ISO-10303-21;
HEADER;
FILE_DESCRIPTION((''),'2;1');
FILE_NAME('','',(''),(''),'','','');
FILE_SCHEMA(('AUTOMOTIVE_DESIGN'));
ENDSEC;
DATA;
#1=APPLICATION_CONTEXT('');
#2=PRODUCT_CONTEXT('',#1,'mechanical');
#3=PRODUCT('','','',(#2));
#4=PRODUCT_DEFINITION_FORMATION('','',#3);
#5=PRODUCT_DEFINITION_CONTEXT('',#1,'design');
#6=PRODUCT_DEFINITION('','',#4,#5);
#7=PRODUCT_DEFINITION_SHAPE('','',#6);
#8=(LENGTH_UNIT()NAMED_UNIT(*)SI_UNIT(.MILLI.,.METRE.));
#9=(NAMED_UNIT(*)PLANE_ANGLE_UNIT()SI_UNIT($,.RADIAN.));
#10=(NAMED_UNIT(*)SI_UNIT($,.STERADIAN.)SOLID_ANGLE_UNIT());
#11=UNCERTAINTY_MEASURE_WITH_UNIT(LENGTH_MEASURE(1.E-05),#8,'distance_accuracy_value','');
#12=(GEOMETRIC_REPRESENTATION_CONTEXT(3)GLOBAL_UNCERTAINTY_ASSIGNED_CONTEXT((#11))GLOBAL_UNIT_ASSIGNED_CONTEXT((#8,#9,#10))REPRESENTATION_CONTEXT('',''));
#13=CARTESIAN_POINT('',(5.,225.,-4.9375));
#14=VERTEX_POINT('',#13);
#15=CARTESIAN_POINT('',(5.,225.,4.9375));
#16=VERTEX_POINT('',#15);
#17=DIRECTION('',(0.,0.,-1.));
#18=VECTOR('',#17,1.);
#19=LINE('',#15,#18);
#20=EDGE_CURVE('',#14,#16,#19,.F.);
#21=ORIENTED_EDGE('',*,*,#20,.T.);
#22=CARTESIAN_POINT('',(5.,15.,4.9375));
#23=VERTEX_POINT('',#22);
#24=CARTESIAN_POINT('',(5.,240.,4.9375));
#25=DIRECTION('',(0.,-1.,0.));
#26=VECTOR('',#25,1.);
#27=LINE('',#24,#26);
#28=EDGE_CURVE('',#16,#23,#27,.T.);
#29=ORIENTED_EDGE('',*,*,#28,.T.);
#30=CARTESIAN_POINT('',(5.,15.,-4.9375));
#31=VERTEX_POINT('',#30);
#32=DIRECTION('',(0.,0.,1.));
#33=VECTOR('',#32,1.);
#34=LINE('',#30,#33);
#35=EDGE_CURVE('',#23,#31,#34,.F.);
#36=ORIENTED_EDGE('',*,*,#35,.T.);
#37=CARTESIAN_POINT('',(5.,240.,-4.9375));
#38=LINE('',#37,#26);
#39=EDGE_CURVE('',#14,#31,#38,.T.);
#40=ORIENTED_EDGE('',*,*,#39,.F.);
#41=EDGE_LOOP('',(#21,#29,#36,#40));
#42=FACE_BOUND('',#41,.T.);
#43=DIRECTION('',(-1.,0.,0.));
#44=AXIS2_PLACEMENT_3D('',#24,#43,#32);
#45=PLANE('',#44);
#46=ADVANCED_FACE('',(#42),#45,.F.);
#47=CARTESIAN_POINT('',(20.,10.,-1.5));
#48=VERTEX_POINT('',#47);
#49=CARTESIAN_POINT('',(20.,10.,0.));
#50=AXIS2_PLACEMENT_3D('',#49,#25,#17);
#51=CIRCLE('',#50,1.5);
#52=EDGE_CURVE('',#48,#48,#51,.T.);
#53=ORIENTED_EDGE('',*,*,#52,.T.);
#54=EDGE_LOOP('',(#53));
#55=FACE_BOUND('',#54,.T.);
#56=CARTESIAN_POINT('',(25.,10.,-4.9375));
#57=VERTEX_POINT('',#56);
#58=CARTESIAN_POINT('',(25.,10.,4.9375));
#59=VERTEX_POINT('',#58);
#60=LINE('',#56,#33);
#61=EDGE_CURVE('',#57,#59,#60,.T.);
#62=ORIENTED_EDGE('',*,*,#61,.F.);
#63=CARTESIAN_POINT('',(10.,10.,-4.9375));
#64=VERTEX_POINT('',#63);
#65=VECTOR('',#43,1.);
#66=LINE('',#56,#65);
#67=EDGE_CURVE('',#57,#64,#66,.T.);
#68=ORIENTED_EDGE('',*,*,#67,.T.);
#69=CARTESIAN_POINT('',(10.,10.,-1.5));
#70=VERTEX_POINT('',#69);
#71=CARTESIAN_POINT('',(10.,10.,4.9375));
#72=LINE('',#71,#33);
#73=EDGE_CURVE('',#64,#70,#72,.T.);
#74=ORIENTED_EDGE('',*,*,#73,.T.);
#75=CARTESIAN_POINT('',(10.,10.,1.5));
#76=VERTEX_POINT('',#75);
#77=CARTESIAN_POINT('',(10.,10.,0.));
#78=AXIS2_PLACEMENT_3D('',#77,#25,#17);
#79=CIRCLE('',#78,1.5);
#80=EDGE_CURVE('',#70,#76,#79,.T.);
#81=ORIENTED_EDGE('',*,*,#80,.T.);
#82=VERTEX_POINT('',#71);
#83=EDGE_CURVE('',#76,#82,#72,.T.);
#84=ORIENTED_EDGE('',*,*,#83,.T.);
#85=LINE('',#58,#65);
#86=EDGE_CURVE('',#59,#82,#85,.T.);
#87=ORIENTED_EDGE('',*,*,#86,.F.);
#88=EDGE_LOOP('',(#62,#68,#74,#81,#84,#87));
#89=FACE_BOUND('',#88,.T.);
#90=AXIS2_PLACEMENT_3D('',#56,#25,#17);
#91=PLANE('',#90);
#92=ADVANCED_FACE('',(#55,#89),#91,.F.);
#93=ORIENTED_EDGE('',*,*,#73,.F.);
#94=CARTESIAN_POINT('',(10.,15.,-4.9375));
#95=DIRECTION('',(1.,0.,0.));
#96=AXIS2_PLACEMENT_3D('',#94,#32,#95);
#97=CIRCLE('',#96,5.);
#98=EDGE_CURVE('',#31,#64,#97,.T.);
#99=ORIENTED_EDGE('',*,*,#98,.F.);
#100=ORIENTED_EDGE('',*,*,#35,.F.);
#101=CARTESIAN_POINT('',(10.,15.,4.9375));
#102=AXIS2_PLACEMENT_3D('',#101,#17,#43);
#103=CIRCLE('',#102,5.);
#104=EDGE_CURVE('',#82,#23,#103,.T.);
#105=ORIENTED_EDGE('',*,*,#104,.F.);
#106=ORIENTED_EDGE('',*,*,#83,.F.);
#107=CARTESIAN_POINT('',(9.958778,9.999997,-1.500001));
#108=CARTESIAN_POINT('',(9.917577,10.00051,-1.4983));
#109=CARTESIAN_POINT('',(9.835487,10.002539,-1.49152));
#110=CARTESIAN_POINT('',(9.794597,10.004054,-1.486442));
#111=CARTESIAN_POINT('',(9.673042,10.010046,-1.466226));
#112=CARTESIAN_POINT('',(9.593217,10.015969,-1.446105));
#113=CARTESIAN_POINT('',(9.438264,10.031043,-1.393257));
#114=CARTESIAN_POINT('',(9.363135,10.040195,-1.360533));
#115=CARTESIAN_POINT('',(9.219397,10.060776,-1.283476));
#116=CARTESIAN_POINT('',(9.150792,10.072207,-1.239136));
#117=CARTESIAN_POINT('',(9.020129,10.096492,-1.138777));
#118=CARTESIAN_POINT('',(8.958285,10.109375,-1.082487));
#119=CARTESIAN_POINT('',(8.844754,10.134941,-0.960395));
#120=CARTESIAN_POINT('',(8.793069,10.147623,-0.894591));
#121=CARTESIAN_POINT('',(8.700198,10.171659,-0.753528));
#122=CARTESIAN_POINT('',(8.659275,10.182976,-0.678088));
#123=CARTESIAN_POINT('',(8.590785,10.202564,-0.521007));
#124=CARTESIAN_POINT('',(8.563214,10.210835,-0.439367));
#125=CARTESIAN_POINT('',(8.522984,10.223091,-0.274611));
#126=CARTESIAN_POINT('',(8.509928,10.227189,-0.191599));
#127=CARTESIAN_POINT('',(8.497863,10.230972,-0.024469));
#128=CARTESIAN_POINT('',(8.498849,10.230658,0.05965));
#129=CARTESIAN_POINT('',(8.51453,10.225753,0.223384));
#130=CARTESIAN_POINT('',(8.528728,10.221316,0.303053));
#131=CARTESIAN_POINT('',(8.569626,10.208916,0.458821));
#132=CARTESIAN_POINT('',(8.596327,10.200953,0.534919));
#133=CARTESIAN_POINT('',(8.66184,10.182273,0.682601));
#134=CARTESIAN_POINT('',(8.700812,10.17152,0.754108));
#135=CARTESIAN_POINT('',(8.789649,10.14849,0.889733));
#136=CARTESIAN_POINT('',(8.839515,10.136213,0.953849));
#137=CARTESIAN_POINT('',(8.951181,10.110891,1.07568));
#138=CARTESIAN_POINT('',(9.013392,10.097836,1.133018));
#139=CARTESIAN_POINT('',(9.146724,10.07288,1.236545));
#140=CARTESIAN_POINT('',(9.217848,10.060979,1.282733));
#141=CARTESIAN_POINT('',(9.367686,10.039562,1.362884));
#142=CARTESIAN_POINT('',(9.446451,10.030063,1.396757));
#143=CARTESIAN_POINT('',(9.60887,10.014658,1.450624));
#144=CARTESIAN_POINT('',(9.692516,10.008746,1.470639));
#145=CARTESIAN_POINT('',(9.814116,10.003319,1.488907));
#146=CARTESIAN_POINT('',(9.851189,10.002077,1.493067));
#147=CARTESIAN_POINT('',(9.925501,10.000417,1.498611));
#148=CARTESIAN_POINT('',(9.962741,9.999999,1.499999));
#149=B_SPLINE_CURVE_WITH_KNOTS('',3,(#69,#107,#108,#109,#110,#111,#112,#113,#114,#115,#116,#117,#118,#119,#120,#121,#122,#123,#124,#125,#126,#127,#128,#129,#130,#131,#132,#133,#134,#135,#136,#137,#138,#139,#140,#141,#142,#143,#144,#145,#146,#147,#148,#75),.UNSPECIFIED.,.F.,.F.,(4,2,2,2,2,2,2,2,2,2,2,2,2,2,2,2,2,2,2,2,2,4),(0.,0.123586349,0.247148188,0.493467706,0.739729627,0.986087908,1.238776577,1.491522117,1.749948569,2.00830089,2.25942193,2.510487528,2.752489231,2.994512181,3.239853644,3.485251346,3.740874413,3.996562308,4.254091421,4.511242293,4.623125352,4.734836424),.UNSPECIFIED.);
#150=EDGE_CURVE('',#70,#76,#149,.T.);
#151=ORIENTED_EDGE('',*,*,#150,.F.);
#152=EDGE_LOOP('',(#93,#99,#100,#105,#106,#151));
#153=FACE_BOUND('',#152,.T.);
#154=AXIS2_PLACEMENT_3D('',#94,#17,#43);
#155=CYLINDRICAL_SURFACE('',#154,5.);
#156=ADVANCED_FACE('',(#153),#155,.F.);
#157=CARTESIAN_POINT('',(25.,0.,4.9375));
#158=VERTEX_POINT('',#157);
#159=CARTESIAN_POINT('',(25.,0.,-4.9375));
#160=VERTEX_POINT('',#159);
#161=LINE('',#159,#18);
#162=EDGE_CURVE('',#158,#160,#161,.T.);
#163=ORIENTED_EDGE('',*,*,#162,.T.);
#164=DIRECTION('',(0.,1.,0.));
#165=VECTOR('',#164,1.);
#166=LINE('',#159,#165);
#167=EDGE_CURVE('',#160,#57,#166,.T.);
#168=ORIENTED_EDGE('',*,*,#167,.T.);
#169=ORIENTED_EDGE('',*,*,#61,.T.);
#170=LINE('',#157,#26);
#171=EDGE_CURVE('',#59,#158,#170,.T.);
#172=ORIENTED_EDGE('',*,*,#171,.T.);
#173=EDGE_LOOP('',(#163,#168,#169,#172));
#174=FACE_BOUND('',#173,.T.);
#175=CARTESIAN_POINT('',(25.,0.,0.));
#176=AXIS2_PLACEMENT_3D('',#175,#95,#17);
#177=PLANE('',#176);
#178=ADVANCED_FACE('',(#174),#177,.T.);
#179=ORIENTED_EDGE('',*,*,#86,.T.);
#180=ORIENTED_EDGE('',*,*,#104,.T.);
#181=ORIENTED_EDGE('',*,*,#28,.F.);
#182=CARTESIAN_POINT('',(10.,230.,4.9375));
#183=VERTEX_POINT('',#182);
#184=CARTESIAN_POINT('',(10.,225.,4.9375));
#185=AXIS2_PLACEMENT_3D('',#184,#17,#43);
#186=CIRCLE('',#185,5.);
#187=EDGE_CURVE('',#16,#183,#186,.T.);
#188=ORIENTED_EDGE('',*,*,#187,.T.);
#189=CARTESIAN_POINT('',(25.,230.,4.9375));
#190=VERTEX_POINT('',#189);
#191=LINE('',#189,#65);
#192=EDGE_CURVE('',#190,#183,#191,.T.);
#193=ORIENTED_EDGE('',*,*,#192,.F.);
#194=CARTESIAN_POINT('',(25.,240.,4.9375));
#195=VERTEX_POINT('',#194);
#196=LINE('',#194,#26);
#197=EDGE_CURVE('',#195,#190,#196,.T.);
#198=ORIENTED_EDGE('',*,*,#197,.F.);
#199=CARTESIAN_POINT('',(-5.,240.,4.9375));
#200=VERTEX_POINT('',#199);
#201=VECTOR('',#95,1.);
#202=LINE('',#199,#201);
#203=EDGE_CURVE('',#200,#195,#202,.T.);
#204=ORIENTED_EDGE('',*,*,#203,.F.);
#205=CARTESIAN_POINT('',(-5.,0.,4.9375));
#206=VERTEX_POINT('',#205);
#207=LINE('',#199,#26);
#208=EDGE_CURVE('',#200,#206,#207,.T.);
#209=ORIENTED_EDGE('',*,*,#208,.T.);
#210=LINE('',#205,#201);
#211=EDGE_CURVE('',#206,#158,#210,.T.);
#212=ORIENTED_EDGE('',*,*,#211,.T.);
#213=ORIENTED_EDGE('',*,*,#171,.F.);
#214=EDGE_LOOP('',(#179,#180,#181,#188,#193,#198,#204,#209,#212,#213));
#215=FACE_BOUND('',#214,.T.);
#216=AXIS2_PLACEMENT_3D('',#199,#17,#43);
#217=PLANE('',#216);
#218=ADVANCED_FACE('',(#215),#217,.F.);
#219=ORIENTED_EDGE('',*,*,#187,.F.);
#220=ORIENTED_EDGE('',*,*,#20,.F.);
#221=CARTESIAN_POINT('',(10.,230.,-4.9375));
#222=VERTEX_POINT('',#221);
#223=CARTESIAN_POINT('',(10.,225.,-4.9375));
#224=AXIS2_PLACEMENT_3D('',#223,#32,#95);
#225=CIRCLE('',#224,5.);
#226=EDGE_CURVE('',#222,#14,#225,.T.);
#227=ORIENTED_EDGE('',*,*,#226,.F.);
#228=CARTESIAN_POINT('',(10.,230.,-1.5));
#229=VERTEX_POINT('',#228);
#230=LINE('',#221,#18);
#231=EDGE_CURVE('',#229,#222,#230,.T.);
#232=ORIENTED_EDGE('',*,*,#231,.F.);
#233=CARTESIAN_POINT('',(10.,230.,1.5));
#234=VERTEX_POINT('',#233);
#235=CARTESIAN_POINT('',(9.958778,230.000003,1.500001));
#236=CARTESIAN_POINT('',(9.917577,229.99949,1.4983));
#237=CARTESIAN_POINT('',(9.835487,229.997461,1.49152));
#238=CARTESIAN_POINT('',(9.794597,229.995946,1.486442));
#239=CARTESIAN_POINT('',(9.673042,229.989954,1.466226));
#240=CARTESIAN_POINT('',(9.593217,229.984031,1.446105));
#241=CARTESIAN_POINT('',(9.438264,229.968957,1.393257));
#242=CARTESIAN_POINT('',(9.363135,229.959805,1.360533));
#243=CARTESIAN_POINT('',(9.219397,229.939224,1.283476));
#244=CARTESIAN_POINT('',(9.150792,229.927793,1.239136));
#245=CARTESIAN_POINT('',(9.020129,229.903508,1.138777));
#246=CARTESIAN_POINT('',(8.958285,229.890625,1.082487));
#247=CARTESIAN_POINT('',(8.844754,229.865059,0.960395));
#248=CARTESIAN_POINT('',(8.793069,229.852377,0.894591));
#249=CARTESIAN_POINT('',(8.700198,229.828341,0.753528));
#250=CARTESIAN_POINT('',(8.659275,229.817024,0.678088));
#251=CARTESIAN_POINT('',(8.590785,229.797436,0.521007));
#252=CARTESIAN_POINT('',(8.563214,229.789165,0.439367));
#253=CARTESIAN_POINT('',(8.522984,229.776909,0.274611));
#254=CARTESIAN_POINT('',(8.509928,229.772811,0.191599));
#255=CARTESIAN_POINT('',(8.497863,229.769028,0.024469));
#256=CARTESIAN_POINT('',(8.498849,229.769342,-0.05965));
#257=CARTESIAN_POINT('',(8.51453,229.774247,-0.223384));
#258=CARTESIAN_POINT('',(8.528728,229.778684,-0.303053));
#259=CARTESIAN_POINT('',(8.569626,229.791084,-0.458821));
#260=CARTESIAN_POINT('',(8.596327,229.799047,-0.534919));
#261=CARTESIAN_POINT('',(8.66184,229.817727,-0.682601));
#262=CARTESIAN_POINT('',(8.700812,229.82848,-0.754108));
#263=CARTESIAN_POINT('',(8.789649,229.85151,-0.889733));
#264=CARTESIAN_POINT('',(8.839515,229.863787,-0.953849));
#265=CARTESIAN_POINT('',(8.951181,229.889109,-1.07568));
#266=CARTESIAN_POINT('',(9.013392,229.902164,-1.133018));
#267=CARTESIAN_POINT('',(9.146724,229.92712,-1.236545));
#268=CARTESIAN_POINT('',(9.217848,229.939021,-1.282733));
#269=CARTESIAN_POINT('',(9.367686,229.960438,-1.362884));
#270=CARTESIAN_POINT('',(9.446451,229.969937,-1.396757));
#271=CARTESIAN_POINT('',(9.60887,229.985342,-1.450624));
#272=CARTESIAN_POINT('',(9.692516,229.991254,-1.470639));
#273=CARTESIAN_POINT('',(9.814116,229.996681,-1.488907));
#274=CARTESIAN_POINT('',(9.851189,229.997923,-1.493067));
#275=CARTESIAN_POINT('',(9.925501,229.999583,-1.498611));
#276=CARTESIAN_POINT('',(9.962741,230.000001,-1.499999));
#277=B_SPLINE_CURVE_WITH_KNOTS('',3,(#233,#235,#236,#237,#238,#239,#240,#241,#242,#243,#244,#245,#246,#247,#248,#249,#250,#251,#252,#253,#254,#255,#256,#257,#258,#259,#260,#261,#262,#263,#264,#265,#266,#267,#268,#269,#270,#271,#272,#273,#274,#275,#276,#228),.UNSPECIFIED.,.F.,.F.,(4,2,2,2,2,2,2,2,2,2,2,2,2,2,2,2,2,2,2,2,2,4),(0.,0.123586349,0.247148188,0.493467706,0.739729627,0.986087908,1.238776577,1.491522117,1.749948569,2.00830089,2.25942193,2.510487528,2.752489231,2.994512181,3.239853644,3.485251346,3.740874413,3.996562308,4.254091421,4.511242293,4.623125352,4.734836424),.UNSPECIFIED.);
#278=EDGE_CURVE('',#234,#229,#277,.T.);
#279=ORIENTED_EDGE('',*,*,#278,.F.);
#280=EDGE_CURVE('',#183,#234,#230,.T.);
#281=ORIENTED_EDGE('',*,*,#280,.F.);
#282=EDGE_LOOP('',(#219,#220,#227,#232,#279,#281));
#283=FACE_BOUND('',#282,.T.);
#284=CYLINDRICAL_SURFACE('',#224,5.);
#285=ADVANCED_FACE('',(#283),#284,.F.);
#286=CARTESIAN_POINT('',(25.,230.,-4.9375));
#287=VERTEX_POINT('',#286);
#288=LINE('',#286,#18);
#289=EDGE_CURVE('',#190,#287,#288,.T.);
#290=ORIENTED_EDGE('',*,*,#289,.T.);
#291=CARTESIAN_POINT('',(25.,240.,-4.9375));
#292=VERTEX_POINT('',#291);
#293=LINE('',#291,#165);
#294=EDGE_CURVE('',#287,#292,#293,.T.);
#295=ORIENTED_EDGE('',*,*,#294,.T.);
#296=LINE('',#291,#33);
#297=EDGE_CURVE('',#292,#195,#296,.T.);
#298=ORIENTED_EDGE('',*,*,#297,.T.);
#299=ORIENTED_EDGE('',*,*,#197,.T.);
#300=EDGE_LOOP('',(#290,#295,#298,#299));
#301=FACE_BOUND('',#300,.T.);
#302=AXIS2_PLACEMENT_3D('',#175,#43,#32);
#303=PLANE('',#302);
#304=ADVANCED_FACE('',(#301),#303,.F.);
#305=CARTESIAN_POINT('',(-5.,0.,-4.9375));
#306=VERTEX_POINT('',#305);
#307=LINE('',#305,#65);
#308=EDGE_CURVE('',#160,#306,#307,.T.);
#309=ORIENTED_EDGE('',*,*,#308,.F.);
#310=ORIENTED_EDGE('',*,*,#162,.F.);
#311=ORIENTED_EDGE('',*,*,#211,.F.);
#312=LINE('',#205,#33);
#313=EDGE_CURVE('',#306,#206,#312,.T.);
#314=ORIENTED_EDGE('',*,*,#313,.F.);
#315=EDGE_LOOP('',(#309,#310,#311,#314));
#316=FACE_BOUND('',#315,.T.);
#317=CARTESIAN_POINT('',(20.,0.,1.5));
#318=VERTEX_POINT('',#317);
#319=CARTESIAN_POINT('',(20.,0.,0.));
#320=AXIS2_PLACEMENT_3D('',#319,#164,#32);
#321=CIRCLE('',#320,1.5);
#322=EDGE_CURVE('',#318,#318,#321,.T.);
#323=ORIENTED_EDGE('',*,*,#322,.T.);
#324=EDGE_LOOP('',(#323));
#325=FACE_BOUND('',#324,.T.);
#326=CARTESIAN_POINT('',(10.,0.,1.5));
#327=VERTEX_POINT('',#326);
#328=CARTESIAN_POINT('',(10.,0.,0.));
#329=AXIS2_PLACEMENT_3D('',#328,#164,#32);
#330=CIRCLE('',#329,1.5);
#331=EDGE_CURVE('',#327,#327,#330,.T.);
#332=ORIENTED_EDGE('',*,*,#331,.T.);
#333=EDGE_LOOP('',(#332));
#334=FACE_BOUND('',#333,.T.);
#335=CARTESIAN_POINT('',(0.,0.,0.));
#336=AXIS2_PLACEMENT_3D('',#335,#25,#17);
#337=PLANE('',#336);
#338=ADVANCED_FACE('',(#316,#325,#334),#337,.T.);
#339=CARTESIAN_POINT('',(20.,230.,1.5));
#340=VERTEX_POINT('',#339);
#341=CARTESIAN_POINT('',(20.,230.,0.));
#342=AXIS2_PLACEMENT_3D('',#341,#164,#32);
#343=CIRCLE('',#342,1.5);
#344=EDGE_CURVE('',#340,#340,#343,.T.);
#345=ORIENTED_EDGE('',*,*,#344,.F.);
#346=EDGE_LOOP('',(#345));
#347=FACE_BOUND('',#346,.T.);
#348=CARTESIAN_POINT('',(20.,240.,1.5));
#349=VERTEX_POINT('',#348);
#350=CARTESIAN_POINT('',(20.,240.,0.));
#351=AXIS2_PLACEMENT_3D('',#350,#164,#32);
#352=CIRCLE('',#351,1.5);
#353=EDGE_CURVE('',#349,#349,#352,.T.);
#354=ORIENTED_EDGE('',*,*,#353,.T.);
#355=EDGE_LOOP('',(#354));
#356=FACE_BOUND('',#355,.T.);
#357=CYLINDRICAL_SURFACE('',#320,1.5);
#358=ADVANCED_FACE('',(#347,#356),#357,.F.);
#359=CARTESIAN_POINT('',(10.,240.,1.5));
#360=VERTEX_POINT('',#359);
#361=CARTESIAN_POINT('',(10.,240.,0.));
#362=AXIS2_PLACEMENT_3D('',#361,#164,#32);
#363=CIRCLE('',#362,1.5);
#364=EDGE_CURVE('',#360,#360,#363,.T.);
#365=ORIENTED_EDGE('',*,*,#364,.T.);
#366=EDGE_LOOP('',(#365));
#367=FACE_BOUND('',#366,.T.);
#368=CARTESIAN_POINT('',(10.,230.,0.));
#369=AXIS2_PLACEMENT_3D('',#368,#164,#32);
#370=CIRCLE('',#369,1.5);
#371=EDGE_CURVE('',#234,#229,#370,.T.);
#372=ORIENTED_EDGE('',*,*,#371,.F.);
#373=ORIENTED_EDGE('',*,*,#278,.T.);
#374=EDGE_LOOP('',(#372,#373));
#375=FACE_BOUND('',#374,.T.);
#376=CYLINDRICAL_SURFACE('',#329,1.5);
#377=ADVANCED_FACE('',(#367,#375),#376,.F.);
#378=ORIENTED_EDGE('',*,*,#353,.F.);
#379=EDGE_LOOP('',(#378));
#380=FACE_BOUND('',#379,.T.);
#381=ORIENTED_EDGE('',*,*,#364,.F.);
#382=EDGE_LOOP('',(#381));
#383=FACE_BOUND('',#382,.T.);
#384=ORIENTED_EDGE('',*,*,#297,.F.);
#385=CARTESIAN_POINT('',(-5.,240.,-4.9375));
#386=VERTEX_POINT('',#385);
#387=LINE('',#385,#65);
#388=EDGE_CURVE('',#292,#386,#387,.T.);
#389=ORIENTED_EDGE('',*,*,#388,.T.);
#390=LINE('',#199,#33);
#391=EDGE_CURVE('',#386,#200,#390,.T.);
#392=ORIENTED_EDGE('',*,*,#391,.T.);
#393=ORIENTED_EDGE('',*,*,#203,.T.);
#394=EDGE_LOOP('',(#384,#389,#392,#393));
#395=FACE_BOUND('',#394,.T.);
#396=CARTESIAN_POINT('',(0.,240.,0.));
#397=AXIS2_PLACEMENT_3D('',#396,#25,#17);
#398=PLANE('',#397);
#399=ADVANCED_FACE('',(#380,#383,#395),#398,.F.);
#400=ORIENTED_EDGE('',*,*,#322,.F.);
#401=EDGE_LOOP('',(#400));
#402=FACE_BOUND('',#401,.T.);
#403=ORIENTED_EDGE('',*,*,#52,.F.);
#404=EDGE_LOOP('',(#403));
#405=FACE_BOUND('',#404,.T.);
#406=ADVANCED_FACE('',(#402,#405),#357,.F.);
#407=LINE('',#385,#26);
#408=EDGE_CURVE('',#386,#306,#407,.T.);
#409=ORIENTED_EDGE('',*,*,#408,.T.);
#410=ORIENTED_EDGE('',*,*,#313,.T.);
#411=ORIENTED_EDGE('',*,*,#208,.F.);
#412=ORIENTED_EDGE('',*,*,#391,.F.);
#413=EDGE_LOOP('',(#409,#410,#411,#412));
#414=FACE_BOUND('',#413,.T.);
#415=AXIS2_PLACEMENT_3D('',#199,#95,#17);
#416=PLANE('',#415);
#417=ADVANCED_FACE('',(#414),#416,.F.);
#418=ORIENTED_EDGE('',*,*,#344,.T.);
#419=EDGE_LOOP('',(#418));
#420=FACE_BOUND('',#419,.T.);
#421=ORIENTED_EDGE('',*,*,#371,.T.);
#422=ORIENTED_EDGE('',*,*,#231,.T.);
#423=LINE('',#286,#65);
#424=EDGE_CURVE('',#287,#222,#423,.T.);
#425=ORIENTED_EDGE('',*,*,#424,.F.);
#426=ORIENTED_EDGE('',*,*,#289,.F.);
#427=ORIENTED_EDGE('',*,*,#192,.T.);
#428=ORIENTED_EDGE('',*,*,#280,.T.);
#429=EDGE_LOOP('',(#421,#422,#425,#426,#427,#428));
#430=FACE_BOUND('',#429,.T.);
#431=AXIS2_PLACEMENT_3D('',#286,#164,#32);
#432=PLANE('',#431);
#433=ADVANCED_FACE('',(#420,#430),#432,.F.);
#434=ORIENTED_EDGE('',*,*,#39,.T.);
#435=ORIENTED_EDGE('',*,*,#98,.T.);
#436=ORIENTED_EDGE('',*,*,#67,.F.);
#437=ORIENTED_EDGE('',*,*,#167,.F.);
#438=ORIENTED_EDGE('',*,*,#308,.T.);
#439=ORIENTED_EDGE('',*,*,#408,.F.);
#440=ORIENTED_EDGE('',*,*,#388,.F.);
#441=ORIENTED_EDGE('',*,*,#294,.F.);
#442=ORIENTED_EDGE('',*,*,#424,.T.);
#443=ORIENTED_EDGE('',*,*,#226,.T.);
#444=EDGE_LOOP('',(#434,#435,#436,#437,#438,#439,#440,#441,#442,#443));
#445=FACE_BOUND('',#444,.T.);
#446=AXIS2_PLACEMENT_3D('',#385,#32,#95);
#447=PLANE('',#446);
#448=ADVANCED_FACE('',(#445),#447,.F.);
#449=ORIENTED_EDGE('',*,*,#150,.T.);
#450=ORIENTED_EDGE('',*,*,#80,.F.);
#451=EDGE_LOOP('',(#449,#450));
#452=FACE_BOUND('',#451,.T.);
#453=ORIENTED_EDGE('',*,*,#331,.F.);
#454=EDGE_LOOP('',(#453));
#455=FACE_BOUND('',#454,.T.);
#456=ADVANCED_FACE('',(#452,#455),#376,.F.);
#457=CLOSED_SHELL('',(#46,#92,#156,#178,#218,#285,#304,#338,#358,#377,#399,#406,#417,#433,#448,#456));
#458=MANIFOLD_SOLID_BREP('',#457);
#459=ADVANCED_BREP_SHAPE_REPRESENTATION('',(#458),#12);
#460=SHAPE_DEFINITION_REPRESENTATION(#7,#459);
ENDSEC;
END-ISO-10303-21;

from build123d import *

# Parameters (mm, degrees)
SKETCH1_W           = 10
SKETCH1_H           = 9.875
BOSS_EXTRUDE1_DEPTH = 240
SKETCH2_W           = 9.875
SKETCH2_H           = 10
BOSS_EXTRUDE2_DEPTH = 20
SKETCH3_R           = 1.5
CUT_EXTRUDE1_DEPTH  = 242.349081014
FILLET1_R           = 5


with BuildPart() as part:
    # Sketch1 → Boss-Extrude1 (new body)
    with BuildSketch(Plane(origin=(0, 0, 0), x_dir=(1, 0, 0), z_dir=(0, 1, 0))):
        Rectangle(SKETCH1_W, SKETCH1_H)
    extrude(amount=BOSS_EXTRUDE1_DEPTH)

    # Sketch2 → Boss-Extrude2 (add)
    with BuildSketch(Plane(origin=(5, 0, 0), x_dir=(0, 0, -1), z_dir=(1, 0, 0))):
        with Locations((0, 5)):
            Rectangle(SKETCH2_W, SKETCH2_H)
        with Locations((0, 235)):
            Rectangle(SKETCH2_W, SKETCH2_H)
    extrude(amount=BOSS_EXTRUDE2_DEPTH)

    # Sketch3 → Cut-Extrude1 (cut, through all)
    with BuildSketch(Plane(origin=(0, 240, 0), x_dir=(1, 0, 0), z_dir=(0, 1, 0))):
        with Locations(Location((10, 0, 0), (0, 0, 270))):
            Circle(SKETCH3_R)
        with Locations(Location((20, 0, 0), (0, 0, 270))):
            Circle(SKETCH3_R)
    extrude(amount=-CUT_EXTRUDE1_DEPTH, mode=Mode.SUBTRACT)

    # Fillet1
    # the kernel refuses this fillet: 5 mm, written as the material it adds along each edge
    with BuildSketch(Plane(origin=(5, 10, 4.9375), x_dir=(0, 1, 0), z_dir=(0, 0, -1))) as fillet1_piece_1_section:
        with BuildLine():
            CenterArc((FILLET1_R, FILLET1_R), FILLET1_R, 180, 90)
            Line((0, FILLET1_R), (0, 0))
            Line((0, 0), (FILLET1_R, 0))
        make_face()
    fillet1_piece_1 = extrude(amount=9.875, mode=Mode.PRIVATE)
    fillet1_piece_1 = fillet1_piece_1 - Plane(origin=(10, 11.142134011, 0), x_dir=(0, 0, 1), z_dir=(0, 1, 0)) * Cylinder(1.5, 40, mode=Mode.PRIVATE)
    add(fillet1_piece_1)
    with BuildSketch(Plane(origin=(5, 230, 4.9375), x_dir=(1, 0, 0), z_dir=(0, 0, -1))) as fillet1_piece_2_section:
        with BuildLine():
            CenterArc((FILLET1_R, FILLET1_R), FILLET1_R, 180, 90)
            Line((0, FILLET1_R), (0, 0))
            Line((0, 0), (FILLET1_R, 0))
        make_face()
    fillet1_piece_2 = extrude(amount=9.875, mode=Mode.PRIVATE)
    fillet1_piece_2 = fillet1_piece_2 - Plane(origin=(10, 228.857865929, 0), x_dir=(0, 0, 1), z_dir=(0, 1, 0)) * Cylinder(1.5, 40, mode=Mode.PRIVATE)
    add(fillet1_piece_2)


solid = part.part
